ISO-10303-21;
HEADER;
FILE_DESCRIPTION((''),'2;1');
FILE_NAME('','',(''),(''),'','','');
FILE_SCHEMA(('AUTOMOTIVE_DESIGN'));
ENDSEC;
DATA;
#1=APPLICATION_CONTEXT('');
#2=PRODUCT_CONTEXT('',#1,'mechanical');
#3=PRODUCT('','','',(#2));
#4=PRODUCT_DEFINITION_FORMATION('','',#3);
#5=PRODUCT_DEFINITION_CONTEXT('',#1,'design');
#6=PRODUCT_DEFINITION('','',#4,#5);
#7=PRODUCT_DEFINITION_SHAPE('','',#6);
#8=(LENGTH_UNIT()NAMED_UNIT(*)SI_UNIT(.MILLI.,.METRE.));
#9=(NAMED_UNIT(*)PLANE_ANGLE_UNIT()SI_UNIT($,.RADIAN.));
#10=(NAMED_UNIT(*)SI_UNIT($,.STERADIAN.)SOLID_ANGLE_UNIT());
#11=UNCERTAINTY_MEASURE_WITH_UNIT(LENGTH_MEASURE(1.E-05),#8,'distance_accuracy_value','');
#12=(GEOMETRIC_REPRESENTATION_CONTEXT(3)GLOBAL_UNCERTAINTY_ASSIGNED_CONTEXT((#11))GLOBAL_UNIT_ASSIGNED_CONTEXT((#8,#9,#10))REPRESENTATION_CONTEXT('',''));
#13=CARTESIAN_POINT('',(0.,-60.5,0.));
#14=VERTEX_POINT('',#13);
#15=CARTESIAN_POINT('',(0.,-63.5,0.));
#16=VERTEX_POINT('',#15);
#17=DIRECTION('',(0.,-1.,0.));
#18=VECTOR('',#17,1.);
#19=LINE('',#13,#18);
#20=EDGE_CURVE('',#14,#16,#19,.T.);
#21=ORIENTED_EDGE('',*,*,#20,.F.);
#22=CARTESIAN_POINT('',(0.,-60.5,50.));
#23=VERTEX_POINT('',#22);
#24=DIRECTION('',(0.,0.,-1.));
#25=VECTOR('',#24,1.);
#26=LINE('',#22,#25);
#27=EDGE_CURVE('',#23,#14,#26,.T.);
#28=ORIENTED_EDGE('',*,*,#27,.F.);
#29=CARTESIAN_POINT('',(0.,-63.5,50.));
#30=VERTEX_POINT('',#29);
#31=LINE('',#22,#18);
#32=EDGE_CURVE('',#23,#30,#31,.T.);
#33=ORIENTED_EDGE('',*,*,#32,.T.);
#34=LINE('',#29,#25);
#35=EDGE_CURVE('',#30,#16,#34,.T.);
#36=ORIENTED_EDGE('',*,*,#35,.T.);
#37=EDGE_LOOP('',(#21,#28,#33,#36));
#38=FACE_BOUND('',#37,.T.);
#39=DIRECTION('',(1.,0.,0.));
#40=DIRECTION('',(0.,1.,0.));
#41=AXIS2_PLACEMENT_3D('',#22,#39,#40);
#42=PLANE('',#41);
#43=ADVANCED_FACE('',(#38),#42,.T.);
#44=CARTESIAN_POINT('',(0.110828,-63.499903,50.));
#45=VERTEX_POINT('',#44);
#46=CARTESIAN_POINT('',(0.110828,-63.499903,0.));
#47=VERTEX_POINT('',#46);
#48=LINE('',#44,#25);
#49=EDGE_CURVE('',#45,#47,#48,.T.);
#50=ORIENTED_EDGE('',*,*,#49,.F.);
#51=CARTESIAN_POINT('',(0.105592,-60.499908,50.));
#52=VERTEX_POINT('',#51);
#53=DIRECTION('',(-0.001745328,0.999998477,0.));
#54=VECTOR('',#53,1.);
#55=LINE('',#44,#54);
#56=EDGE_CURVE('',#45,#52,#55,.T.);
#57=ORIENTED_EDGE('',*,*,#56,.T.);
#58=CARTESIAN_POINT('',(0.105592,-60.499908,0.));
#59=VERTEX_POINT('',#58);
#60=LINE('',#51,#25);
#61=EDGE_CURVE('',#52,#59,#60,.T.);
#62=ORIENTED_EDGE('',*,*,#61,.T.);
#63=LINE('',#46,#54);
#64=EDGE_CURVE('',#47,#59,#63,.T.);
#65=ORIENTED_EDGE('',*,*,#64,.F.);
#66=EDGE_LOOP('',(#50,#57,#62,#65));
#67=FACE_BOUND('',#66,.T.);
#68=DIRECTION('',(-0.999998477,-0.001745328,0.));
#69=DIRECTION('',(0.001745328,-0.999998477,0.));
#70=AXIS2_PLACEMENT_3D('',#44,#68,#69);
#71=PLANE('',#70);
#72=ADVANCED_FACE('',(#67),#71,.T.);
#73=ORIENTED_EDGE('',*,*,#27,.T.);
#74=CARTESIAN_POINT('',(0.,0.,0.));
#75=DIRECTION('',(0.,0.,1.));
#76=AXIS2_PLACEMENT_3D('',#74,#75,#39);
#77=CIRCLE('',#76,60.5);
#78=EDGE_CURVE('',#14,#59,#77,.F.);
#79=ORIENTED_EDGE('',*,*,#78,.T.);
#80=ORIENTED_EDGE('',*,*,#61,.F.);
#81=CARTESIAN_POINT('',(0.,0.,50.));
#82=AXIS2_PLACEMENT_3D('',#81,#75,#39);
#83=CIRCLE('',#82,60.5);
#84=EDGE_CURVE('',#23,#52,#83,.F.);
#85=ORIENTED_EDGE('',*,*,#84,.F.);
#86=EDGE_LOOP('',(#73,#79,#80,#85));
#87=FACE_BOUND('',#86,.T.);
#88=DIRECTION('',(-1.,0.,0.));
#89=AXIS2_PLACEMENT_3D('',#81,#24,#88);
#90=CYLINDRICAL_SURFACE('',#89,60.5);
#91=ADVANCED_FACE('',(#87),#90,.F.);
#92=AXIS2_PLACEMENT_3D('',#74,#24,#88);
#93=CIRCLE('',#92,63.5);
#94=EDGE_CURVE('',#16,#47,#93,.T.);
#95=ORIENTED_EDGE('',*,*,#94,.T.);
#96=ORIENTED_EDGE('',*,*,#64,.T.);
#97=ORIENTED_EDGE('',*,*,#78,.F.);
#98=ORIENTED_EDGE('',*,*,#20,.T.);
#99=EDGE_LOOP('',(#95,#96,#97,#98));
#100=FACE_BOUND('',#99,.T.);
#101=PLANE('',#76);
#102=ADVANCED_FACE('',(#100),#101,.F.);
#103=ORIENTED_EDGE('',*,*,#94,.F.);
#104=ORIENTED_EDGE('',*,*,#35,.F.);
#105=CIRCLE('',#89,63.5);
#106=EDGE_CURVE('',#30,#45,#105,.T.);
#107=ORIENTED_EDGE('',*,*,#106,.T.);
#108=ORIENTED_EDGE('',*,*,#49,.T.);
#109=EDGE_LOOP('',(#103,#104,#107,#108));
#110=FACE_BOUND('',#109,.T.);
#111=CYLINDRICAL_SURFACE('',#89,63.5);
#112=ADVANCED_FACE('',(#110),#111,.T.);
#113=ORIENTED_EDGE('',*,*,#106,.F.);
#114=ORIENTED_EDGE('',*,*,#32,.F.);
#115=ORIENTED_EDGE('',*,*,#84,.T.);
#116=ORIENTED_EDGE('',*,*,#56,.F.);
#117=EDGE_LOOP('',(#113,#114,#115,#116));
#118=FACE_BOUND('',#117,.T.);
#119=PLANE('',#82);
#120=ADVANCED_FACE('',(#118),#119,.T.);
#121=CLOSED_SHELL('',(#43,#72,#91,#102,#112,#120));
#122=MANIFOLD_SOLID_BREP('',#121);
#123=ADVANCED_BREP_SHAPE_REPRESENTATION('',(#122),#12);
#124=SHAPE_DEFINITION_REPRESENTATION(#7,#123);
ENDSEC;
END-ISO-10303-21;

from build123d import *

# Parameters (mm, degrees)
BASE_FLANGE1_DEPTH = 50


# Sheet-metal steps are written as plain solids
with BuildPart() as part:
    # Sketch2 → Base-Flange1 (new body)
    with BuildSketch(Plane.XY):
        with BuildLine():
            ThreePointArc((0, -63.5), (-0.055414197, 63.499975821), (0.110828351, -63.499903284))
            Line((0.110828351, -63.499903284), (0.105592366, -60.499907853))
            ThreePointArc((0.105592366, -60.499907853), (-0.052796203, 60.499976963), (0, -60.5))
            Line((0, -60.5), (0, -63.5))
        make_face()
    extrude(amount=BASE_FLANGE1_DEPTH)


solid = part.part
